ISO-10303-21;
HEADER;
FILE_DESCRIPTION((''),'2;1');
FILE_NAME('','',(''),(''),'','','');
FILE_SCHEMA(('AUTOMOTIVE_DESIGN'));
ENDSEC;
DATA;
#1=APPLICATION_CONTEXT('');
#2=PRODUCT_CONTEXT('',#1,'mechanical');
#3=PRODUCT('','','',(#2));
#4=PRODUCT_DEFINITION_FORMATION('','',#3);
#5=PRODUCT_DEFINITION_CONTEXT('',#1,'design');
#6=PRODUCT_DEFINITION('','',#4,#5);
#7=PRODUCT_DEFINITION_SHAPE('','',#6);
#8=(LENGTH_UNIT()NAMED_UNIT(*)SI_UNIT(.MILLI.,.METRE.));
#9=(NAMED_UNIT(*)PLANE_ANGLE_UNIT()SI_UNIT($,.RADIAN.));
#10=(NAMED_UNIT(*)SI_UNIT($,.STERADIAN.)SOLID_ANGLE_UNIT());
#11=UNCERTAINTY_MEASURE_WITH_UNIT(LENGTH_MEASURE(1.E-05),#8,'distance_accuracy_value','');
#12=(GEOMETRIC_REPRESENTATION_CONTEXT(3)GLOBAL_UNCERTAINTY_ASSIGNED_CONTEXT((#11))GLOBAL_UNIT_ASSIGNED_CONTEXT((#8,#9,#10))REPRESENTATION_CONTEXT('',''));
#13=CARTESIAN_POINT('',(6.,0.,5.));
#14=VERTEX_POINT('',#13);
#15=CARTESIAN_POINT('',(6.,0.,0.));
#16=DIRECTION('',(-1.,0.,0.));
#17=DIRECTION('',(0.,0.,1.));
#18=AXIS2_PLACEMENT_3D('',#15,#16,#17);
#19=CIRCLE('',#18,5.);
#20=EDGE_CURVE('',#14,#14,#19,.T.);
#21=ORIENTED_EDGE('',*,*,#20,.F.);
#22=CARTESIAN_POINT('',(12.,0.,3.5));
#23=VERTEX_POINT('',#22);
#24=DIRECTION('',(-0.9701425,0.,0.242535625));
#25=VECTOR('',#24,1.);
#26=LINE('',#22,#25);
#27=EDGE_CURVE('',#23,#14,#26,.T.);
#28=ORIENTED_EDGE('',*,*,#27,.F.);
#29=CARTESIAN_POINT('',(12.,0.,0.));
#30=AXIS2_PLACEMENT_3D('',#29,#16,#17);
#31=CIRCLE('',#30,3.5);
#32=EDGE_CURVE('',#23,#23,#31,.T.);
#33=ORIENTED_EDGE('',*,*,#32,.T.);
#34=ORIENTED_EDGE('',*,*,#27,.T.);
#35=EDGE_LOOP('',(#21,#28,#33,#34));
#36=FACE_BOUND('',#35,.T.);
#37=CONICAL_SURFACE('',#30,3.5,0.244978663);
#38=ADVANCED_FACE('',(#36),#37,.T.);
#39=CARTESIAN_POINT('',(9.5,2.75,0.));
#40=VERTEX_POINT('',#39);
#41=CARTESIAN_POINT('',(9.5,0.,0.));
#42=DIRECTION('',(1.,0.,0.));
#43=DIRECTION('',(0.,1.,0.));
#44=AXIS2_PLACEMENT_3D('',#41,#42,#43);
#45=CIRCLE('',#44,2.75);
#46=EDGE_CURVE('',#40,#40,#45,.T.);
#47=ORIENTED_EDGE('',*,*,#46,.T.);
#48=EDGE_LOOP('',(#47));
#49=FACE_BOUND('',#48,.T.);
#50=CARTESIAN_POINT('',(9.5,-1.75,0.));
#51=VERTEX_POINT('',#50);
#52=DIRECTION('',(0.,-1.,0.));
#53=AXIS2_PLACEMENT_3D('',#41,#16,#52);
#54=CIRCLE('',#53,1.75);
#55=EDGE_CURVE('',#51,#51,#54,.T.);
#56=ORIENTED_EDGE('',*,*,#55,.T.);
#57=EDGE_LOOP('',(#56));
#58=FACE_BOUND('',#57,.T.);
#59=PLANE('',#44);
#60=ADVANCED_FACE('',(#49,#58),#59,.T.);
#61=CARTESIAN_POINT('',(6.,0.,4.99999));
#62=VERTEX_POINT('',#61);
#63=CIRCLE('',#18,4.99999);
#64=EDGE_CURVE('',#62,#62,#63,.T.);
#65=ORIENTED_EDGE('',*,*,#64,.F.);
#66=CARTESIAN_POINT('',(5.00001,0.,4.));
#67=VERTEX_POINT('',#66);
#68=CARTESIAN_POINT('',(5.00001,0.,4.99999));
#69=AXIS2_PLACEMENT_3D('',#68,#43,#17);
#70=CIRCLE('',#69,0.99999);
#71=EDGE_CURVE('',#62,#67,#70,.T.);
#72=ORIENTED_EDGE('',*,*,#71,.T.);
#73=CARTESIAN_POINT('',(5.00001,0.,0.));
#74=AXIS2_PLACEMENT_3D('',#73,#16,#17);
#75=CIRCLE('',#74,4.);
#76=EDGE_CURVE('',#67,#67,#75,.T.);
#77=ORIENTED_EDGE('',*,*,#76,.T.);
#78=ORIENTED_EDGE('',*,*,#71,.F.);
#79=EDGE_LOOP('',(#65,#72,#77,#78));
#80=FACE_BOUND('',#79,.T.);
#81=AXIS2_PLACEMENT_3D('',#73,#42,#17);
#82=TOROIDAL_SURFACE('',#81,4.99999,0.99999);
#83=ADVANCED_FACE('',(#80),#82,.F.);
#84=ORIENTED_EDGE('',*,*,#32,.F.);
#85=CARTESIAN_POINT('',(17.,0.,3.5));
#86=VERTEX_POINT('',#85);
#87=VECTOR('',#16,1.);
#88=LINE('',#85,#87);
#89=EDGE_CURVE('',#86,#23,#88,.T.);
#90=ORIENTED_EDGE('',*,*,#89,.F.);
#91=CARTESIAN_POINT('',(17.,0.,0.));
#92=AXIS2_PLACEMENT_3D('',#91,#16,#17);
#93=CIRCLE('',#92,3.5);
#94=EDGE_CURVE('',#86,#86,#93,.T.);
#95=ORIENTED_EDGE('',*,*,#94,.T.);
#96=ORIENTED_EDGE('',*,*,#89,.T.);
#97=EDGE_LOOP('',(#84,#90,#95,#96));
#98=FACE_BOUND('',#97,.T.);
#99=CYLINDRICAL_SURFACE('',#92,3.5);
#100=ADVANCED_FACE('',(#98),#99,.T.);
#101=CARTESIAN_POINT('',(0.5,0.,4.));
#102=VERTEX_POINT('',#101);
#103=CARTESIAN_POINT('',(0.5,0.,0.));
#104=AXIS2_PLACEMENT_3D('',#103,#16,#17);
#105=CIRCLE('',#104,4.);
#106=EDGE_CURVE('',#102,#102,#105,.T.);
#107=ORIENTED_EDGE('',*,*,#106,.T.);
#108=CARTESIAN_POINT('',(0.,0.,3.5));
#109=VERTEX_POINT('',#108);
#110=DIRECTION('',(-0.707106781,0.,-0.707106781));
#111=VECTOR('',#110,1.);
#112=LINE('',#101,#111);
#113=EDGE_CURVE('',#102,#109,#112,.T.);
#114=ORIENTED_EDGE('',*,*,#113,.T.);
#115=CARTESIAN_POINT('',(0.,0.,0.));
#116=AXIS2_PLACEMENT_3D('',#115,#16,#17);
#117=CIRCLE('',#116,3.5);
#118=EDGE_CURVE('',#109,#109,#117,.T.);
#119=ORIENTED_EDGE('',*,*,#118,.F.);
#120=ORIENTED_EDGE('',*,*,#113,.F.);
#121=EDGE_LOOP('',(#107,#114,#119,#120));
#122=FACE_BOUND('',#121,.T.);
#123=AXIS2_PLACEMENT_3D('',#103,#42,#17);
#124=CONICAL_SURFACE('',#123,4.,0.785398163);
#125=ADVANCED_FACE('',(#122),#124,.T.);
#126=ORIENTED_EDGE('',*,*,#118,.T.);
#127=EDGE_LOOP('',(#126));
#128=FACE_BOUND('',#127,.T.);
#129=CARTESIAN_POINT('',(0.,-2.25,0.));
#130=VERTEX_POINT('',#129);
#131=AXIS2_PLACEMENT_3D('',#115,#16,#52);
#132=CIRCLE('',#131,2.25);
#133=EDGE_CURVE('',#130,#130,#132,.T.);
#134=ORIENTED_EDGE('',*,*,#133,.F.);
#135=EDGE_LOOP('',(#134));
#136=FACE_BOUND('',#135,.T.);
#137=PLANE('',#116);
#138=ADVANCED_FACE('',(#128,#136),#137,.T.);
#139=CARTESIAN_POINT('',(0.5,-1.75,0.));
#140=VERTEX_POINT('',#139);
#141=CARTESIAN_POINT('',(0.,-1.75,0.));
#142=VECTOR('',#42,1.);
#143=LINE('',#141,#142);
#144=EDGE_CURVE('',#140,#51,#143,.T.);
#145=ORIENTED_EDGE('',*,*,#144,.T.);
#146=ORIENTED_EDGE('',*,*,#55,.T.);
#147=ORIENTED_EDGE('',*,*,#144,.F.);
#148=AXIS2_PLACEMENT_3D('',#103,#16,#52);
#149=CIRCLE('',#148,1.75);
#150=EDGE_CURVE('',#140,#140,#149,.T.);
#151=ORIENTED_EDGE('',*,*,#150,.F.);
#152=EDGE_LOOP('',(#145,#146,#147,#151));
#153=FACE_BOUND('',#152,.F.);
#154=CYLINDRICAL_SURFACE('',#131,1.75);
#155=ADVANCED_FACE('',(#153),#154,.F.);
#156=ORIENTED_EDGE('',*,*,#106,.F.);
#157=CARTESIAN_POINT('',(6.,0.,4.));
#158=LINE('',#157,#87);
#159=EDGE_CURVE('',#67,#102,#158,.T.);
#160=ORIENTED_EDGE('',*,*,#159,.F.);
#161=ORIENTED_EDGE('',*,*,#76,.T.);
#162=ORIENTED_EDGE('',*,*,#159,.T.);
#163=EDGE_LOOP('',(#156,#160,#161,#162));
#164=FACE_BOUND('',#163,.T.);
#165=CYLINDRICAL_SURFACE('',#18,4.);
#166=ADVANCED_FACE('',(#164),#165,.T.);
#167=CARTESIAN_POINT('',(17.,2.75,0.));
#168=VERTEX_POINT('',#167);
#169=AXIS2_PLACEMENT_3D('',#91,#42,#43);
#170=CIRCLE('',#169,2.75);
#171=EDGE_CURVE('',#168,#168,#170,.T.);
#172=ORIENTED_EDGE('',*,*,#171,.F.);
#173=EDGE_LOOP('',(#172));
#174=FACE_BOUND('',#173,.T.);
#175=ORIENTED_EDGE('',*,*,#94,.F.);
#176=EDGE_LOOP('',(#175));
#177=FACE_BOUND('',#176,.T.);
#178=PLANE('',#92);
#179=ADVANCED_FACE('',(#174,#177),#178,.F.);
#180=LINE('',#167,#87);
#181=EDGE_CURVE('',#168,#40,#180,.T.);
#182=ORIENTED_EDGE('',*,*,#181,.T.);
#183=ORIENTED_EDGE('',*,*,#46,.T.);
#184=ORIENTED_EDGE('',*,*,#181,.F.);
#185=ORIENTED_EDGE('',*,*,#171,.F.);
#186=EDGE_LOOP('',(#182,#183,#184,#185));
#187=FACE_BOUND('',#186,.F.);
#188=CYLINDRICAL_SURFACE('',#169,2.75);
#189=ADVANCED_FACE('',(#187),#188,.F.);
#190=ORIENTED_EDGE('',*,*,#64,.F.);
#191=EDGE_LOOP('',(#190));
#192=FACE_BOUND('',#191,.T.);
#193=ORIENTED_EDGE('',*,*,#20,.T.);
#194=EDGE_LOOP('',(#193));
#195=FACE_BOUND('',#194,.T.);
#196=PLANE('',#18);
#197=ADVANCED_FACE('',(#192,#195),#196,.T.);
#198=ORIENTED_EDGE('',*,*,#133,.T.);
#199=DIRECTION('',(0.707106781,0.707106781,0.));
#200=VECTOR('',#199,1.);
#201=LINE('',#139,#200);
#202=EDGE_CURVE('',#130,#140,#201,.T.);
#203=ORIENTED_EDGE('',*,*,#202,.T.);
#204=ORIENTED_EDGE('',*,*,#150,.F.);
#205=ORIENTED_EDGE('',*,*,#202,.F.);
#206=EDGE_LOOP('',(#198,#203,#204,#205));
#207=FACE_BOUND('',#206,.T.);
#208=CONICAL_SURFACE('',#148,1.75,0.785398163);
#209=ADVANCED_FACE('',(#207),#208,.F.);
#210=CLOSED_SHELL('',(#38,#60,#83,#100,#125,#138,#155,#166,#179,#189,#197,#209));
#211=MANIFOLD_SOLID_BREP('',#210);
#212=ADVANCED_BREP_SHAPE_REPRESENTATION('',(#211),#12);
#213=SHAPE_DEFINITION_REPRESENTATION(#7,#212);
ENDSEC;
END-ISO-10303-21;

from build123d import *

# Parameters (mm, degrees)
F2_R     = 0.99999
F3_R     = 2.75
F4_DEPTH = 7.5
F5_R     = 1.75
F6_DEPTH = 9.5
F7_SIZE  = 0.5


# Not quite as in the source:
# - a fillet or chamfer is up to 0.001 mm smaller than in the source, because OpenCascade refuses the exact size


with BuildPart() as f1:
    # F0 (on Front) → F1 (revolve)
    with BuildSketch(Plane.XZ):
        Polygon((0, 4), (0, 0), (17, 0), (17, 3.5), (12, 3.5), (6, 5), (6, 4), align=None)
    revolve(axis=Axis((8.5, 0, 0), (-1, 0, 0)))

    # F2 (radius 1 in the source; OpenCascade refuses exactly that, so slightly less here)
    f2_edges = [f1.edges().sort_by_distance(p)[0] for p in [
        (6, 0, -4),
    ]]
    fillet(f2_edges, radius=F2_R)

    # F3 (on face) → F4 (cut)
    with BuildSketch(Plane.YZ.offset(17)):
        Circle(F3_R)
    extrude(amount=-F4_DEPTH, mode=Mode.SUBTRACT)

    # F5 (on face) → F6 (cut, through all)
    with BuildSketch(Plane(origin=(0, 0, 0), x_dir=(0, -1, 0), z_dir=(-1, 0, 0))):
        Circle(F5_R)
    extrude(amount=-F6_DEPTH, mode=Mode.SUBTRACT)

    # F7
    f7_edges = [f1.edges().sort_by_distance(p)[0] for p in [
        (0, 0, -4),
        (0, 1.75, 0),
    ]]
    chamfer(f7_edges, length=F7_SIZE)


solid = f1.part
